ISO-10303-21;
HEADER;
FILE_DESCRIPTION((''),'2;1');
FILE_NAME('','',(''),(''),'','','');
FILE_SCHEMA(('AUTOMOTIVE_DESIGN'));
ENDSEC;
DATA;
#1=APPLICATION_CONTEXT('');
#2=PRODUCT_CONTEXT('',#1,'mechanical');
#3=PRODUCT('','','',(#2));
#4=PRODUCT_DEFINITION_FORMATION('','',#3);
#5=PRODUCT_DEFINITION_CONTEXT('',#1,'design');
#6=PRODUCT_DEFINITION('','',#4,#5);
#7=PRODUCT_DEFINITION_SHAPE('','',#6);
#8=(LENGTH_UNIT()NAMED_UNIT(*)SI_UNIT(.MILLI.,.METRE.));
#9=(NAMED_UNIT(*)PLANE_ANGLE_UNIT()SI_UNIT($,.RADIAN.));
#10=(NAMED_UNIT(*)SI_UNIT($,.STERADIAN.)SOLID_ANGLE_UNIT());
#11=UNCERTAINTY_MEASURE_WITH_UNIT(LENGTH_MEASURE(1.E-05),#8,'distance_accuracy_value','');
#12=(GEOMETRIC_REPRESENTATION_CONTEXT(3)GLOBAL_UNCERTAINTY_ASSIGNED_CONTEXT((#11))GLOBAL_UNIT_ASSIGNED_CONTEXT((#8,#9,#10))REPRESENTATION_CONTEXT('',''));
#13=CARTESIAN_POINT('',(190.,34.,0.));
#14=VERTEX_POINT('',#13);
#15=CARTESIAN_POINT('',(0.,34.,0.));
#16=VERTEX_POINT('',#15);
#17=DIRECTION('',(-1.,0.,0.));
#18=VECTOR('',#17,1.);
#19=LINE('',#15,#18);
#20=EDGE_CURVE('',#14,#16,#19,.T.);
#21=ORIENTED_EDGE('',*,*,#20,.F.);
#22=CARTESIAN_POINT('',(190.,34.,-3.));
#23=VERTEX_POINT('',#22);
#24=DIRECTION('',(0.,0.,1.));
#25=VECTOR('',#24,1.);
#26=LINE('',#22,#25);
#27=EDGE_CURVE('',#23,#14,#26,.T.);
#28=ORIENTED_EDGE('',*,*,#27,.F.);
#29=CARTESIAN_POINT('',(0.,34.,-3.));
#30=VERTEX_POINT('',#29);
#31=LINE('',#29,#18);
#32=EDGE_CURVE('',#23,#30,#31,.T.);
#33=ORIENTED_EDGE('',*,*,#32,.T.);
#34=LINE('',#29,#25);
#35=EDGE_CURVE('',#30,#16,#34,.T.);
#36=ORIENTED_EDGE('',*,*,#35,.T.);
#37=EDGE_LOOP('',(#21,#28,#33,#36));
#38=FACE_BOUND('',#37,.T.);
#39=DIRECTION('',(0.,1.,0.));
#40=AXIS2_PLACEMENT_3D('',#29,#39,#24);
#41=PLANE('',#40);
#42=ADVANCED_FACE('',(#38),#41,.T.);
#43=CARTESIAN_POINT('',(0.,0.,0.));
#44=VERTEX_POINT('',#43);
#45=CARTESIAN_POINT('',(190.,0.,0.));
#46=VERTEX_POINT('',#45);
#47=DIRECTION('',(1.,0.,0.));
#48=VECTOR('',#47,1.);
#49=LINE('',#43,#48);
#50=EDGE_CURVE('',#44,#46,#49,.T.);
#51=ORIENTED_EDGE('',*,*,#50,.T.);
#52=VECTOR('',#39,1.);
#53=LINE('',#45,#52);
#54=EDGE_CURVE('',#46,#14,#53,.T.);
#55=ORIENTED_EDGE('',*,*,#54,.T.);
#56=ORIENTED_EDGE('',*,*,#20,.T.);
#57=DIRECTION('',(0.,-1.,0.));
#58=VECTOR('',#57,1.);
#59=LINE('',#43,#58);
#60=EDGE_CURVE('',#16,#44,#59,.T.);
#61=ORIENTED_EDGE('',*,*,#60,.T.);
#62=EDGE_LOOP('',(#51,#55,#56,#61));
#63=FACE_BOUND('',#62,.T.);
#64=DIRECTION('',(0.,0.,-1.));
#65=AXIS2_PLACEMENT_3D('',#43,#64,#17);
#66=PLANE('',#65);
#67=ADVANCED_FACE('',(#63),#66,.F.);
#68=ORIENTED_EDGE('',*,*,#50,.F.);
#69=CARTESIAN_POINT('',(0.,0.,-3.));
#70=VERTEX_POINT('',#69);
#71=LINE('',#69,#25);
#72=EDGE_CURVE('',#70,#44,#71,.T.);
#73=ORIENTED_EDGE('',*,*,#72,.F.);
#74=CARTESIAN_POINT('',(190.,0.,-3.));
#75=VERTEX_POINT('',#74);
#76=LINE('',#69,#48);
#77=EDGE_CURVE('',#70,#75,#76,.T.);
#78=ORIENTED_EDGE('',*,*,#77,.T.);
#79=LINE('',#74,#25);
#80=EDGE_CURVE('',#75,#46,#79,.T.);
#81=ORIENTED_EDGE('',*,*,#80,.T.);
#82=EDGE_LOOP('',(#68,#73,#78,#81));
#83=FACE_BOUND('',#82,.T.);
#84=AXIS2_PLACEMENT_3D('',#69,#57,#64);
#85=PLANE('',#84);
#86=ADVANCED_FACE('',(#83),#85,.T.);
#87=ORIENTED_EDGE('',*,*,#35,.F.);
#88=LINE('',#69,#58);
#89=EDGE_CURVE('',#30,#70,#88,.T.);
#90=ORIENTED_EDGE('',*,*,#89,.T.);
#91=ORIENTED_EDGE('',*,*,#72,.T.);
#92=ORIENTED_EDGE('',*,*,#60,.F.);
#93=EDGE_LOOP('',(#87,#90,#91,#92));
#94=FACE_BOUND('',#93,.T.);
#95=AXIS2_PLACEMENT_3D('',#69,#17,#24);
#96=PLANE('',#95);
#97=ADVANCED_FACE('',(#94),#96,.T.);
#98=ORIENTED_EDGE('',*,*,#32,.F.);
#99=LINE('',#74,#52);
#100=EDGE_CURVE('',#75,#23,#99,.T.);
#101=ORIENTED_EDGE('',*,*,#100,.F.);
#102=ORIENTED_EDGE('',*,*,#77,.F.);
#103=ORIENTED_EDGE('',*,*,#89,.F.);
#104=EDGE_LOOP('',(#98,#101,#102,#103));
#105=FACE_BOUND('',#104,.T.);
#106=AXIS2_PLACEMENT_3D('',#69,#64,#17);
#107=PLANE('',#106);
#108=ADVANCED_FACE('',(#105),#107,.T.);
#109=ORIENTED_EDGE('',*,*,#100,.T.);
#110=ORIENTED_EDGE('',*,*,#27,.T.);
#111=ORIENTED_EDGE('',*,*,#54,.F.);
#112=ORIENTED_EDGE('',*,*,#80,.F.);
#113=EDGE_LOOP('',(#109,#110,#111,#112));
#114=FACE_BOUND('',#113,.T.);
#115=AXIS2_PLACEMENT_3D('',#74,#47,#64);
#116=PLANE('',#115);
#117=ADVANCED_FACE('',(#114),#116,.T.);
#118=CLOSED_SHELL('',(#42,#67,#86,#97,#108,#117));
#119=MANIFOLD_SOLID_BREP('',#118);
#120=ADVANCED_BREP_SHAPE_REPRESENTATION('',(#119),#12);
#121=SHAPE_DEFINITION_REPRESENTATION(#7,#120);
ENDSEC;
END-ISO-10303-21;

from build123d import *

# Parameters (mm, degrees)
SKETCH1_W          = 190
SKETCH1_H          = 34
BASE_FLANGE1_DEPTH = 3


# Sheet-metal steps are written as plain solids
with BuildPart() as part:
    # Sketch1 → Base-Flange1 (new body)
    with BuildSketch(Plane.XY):
        with Locations((95, 17)):
            Rectangle(SKETCH1_W, SKETCH1_H)
    extrude(amount=-BASE_FLANGE1_DEPTH)


solid = part.part
